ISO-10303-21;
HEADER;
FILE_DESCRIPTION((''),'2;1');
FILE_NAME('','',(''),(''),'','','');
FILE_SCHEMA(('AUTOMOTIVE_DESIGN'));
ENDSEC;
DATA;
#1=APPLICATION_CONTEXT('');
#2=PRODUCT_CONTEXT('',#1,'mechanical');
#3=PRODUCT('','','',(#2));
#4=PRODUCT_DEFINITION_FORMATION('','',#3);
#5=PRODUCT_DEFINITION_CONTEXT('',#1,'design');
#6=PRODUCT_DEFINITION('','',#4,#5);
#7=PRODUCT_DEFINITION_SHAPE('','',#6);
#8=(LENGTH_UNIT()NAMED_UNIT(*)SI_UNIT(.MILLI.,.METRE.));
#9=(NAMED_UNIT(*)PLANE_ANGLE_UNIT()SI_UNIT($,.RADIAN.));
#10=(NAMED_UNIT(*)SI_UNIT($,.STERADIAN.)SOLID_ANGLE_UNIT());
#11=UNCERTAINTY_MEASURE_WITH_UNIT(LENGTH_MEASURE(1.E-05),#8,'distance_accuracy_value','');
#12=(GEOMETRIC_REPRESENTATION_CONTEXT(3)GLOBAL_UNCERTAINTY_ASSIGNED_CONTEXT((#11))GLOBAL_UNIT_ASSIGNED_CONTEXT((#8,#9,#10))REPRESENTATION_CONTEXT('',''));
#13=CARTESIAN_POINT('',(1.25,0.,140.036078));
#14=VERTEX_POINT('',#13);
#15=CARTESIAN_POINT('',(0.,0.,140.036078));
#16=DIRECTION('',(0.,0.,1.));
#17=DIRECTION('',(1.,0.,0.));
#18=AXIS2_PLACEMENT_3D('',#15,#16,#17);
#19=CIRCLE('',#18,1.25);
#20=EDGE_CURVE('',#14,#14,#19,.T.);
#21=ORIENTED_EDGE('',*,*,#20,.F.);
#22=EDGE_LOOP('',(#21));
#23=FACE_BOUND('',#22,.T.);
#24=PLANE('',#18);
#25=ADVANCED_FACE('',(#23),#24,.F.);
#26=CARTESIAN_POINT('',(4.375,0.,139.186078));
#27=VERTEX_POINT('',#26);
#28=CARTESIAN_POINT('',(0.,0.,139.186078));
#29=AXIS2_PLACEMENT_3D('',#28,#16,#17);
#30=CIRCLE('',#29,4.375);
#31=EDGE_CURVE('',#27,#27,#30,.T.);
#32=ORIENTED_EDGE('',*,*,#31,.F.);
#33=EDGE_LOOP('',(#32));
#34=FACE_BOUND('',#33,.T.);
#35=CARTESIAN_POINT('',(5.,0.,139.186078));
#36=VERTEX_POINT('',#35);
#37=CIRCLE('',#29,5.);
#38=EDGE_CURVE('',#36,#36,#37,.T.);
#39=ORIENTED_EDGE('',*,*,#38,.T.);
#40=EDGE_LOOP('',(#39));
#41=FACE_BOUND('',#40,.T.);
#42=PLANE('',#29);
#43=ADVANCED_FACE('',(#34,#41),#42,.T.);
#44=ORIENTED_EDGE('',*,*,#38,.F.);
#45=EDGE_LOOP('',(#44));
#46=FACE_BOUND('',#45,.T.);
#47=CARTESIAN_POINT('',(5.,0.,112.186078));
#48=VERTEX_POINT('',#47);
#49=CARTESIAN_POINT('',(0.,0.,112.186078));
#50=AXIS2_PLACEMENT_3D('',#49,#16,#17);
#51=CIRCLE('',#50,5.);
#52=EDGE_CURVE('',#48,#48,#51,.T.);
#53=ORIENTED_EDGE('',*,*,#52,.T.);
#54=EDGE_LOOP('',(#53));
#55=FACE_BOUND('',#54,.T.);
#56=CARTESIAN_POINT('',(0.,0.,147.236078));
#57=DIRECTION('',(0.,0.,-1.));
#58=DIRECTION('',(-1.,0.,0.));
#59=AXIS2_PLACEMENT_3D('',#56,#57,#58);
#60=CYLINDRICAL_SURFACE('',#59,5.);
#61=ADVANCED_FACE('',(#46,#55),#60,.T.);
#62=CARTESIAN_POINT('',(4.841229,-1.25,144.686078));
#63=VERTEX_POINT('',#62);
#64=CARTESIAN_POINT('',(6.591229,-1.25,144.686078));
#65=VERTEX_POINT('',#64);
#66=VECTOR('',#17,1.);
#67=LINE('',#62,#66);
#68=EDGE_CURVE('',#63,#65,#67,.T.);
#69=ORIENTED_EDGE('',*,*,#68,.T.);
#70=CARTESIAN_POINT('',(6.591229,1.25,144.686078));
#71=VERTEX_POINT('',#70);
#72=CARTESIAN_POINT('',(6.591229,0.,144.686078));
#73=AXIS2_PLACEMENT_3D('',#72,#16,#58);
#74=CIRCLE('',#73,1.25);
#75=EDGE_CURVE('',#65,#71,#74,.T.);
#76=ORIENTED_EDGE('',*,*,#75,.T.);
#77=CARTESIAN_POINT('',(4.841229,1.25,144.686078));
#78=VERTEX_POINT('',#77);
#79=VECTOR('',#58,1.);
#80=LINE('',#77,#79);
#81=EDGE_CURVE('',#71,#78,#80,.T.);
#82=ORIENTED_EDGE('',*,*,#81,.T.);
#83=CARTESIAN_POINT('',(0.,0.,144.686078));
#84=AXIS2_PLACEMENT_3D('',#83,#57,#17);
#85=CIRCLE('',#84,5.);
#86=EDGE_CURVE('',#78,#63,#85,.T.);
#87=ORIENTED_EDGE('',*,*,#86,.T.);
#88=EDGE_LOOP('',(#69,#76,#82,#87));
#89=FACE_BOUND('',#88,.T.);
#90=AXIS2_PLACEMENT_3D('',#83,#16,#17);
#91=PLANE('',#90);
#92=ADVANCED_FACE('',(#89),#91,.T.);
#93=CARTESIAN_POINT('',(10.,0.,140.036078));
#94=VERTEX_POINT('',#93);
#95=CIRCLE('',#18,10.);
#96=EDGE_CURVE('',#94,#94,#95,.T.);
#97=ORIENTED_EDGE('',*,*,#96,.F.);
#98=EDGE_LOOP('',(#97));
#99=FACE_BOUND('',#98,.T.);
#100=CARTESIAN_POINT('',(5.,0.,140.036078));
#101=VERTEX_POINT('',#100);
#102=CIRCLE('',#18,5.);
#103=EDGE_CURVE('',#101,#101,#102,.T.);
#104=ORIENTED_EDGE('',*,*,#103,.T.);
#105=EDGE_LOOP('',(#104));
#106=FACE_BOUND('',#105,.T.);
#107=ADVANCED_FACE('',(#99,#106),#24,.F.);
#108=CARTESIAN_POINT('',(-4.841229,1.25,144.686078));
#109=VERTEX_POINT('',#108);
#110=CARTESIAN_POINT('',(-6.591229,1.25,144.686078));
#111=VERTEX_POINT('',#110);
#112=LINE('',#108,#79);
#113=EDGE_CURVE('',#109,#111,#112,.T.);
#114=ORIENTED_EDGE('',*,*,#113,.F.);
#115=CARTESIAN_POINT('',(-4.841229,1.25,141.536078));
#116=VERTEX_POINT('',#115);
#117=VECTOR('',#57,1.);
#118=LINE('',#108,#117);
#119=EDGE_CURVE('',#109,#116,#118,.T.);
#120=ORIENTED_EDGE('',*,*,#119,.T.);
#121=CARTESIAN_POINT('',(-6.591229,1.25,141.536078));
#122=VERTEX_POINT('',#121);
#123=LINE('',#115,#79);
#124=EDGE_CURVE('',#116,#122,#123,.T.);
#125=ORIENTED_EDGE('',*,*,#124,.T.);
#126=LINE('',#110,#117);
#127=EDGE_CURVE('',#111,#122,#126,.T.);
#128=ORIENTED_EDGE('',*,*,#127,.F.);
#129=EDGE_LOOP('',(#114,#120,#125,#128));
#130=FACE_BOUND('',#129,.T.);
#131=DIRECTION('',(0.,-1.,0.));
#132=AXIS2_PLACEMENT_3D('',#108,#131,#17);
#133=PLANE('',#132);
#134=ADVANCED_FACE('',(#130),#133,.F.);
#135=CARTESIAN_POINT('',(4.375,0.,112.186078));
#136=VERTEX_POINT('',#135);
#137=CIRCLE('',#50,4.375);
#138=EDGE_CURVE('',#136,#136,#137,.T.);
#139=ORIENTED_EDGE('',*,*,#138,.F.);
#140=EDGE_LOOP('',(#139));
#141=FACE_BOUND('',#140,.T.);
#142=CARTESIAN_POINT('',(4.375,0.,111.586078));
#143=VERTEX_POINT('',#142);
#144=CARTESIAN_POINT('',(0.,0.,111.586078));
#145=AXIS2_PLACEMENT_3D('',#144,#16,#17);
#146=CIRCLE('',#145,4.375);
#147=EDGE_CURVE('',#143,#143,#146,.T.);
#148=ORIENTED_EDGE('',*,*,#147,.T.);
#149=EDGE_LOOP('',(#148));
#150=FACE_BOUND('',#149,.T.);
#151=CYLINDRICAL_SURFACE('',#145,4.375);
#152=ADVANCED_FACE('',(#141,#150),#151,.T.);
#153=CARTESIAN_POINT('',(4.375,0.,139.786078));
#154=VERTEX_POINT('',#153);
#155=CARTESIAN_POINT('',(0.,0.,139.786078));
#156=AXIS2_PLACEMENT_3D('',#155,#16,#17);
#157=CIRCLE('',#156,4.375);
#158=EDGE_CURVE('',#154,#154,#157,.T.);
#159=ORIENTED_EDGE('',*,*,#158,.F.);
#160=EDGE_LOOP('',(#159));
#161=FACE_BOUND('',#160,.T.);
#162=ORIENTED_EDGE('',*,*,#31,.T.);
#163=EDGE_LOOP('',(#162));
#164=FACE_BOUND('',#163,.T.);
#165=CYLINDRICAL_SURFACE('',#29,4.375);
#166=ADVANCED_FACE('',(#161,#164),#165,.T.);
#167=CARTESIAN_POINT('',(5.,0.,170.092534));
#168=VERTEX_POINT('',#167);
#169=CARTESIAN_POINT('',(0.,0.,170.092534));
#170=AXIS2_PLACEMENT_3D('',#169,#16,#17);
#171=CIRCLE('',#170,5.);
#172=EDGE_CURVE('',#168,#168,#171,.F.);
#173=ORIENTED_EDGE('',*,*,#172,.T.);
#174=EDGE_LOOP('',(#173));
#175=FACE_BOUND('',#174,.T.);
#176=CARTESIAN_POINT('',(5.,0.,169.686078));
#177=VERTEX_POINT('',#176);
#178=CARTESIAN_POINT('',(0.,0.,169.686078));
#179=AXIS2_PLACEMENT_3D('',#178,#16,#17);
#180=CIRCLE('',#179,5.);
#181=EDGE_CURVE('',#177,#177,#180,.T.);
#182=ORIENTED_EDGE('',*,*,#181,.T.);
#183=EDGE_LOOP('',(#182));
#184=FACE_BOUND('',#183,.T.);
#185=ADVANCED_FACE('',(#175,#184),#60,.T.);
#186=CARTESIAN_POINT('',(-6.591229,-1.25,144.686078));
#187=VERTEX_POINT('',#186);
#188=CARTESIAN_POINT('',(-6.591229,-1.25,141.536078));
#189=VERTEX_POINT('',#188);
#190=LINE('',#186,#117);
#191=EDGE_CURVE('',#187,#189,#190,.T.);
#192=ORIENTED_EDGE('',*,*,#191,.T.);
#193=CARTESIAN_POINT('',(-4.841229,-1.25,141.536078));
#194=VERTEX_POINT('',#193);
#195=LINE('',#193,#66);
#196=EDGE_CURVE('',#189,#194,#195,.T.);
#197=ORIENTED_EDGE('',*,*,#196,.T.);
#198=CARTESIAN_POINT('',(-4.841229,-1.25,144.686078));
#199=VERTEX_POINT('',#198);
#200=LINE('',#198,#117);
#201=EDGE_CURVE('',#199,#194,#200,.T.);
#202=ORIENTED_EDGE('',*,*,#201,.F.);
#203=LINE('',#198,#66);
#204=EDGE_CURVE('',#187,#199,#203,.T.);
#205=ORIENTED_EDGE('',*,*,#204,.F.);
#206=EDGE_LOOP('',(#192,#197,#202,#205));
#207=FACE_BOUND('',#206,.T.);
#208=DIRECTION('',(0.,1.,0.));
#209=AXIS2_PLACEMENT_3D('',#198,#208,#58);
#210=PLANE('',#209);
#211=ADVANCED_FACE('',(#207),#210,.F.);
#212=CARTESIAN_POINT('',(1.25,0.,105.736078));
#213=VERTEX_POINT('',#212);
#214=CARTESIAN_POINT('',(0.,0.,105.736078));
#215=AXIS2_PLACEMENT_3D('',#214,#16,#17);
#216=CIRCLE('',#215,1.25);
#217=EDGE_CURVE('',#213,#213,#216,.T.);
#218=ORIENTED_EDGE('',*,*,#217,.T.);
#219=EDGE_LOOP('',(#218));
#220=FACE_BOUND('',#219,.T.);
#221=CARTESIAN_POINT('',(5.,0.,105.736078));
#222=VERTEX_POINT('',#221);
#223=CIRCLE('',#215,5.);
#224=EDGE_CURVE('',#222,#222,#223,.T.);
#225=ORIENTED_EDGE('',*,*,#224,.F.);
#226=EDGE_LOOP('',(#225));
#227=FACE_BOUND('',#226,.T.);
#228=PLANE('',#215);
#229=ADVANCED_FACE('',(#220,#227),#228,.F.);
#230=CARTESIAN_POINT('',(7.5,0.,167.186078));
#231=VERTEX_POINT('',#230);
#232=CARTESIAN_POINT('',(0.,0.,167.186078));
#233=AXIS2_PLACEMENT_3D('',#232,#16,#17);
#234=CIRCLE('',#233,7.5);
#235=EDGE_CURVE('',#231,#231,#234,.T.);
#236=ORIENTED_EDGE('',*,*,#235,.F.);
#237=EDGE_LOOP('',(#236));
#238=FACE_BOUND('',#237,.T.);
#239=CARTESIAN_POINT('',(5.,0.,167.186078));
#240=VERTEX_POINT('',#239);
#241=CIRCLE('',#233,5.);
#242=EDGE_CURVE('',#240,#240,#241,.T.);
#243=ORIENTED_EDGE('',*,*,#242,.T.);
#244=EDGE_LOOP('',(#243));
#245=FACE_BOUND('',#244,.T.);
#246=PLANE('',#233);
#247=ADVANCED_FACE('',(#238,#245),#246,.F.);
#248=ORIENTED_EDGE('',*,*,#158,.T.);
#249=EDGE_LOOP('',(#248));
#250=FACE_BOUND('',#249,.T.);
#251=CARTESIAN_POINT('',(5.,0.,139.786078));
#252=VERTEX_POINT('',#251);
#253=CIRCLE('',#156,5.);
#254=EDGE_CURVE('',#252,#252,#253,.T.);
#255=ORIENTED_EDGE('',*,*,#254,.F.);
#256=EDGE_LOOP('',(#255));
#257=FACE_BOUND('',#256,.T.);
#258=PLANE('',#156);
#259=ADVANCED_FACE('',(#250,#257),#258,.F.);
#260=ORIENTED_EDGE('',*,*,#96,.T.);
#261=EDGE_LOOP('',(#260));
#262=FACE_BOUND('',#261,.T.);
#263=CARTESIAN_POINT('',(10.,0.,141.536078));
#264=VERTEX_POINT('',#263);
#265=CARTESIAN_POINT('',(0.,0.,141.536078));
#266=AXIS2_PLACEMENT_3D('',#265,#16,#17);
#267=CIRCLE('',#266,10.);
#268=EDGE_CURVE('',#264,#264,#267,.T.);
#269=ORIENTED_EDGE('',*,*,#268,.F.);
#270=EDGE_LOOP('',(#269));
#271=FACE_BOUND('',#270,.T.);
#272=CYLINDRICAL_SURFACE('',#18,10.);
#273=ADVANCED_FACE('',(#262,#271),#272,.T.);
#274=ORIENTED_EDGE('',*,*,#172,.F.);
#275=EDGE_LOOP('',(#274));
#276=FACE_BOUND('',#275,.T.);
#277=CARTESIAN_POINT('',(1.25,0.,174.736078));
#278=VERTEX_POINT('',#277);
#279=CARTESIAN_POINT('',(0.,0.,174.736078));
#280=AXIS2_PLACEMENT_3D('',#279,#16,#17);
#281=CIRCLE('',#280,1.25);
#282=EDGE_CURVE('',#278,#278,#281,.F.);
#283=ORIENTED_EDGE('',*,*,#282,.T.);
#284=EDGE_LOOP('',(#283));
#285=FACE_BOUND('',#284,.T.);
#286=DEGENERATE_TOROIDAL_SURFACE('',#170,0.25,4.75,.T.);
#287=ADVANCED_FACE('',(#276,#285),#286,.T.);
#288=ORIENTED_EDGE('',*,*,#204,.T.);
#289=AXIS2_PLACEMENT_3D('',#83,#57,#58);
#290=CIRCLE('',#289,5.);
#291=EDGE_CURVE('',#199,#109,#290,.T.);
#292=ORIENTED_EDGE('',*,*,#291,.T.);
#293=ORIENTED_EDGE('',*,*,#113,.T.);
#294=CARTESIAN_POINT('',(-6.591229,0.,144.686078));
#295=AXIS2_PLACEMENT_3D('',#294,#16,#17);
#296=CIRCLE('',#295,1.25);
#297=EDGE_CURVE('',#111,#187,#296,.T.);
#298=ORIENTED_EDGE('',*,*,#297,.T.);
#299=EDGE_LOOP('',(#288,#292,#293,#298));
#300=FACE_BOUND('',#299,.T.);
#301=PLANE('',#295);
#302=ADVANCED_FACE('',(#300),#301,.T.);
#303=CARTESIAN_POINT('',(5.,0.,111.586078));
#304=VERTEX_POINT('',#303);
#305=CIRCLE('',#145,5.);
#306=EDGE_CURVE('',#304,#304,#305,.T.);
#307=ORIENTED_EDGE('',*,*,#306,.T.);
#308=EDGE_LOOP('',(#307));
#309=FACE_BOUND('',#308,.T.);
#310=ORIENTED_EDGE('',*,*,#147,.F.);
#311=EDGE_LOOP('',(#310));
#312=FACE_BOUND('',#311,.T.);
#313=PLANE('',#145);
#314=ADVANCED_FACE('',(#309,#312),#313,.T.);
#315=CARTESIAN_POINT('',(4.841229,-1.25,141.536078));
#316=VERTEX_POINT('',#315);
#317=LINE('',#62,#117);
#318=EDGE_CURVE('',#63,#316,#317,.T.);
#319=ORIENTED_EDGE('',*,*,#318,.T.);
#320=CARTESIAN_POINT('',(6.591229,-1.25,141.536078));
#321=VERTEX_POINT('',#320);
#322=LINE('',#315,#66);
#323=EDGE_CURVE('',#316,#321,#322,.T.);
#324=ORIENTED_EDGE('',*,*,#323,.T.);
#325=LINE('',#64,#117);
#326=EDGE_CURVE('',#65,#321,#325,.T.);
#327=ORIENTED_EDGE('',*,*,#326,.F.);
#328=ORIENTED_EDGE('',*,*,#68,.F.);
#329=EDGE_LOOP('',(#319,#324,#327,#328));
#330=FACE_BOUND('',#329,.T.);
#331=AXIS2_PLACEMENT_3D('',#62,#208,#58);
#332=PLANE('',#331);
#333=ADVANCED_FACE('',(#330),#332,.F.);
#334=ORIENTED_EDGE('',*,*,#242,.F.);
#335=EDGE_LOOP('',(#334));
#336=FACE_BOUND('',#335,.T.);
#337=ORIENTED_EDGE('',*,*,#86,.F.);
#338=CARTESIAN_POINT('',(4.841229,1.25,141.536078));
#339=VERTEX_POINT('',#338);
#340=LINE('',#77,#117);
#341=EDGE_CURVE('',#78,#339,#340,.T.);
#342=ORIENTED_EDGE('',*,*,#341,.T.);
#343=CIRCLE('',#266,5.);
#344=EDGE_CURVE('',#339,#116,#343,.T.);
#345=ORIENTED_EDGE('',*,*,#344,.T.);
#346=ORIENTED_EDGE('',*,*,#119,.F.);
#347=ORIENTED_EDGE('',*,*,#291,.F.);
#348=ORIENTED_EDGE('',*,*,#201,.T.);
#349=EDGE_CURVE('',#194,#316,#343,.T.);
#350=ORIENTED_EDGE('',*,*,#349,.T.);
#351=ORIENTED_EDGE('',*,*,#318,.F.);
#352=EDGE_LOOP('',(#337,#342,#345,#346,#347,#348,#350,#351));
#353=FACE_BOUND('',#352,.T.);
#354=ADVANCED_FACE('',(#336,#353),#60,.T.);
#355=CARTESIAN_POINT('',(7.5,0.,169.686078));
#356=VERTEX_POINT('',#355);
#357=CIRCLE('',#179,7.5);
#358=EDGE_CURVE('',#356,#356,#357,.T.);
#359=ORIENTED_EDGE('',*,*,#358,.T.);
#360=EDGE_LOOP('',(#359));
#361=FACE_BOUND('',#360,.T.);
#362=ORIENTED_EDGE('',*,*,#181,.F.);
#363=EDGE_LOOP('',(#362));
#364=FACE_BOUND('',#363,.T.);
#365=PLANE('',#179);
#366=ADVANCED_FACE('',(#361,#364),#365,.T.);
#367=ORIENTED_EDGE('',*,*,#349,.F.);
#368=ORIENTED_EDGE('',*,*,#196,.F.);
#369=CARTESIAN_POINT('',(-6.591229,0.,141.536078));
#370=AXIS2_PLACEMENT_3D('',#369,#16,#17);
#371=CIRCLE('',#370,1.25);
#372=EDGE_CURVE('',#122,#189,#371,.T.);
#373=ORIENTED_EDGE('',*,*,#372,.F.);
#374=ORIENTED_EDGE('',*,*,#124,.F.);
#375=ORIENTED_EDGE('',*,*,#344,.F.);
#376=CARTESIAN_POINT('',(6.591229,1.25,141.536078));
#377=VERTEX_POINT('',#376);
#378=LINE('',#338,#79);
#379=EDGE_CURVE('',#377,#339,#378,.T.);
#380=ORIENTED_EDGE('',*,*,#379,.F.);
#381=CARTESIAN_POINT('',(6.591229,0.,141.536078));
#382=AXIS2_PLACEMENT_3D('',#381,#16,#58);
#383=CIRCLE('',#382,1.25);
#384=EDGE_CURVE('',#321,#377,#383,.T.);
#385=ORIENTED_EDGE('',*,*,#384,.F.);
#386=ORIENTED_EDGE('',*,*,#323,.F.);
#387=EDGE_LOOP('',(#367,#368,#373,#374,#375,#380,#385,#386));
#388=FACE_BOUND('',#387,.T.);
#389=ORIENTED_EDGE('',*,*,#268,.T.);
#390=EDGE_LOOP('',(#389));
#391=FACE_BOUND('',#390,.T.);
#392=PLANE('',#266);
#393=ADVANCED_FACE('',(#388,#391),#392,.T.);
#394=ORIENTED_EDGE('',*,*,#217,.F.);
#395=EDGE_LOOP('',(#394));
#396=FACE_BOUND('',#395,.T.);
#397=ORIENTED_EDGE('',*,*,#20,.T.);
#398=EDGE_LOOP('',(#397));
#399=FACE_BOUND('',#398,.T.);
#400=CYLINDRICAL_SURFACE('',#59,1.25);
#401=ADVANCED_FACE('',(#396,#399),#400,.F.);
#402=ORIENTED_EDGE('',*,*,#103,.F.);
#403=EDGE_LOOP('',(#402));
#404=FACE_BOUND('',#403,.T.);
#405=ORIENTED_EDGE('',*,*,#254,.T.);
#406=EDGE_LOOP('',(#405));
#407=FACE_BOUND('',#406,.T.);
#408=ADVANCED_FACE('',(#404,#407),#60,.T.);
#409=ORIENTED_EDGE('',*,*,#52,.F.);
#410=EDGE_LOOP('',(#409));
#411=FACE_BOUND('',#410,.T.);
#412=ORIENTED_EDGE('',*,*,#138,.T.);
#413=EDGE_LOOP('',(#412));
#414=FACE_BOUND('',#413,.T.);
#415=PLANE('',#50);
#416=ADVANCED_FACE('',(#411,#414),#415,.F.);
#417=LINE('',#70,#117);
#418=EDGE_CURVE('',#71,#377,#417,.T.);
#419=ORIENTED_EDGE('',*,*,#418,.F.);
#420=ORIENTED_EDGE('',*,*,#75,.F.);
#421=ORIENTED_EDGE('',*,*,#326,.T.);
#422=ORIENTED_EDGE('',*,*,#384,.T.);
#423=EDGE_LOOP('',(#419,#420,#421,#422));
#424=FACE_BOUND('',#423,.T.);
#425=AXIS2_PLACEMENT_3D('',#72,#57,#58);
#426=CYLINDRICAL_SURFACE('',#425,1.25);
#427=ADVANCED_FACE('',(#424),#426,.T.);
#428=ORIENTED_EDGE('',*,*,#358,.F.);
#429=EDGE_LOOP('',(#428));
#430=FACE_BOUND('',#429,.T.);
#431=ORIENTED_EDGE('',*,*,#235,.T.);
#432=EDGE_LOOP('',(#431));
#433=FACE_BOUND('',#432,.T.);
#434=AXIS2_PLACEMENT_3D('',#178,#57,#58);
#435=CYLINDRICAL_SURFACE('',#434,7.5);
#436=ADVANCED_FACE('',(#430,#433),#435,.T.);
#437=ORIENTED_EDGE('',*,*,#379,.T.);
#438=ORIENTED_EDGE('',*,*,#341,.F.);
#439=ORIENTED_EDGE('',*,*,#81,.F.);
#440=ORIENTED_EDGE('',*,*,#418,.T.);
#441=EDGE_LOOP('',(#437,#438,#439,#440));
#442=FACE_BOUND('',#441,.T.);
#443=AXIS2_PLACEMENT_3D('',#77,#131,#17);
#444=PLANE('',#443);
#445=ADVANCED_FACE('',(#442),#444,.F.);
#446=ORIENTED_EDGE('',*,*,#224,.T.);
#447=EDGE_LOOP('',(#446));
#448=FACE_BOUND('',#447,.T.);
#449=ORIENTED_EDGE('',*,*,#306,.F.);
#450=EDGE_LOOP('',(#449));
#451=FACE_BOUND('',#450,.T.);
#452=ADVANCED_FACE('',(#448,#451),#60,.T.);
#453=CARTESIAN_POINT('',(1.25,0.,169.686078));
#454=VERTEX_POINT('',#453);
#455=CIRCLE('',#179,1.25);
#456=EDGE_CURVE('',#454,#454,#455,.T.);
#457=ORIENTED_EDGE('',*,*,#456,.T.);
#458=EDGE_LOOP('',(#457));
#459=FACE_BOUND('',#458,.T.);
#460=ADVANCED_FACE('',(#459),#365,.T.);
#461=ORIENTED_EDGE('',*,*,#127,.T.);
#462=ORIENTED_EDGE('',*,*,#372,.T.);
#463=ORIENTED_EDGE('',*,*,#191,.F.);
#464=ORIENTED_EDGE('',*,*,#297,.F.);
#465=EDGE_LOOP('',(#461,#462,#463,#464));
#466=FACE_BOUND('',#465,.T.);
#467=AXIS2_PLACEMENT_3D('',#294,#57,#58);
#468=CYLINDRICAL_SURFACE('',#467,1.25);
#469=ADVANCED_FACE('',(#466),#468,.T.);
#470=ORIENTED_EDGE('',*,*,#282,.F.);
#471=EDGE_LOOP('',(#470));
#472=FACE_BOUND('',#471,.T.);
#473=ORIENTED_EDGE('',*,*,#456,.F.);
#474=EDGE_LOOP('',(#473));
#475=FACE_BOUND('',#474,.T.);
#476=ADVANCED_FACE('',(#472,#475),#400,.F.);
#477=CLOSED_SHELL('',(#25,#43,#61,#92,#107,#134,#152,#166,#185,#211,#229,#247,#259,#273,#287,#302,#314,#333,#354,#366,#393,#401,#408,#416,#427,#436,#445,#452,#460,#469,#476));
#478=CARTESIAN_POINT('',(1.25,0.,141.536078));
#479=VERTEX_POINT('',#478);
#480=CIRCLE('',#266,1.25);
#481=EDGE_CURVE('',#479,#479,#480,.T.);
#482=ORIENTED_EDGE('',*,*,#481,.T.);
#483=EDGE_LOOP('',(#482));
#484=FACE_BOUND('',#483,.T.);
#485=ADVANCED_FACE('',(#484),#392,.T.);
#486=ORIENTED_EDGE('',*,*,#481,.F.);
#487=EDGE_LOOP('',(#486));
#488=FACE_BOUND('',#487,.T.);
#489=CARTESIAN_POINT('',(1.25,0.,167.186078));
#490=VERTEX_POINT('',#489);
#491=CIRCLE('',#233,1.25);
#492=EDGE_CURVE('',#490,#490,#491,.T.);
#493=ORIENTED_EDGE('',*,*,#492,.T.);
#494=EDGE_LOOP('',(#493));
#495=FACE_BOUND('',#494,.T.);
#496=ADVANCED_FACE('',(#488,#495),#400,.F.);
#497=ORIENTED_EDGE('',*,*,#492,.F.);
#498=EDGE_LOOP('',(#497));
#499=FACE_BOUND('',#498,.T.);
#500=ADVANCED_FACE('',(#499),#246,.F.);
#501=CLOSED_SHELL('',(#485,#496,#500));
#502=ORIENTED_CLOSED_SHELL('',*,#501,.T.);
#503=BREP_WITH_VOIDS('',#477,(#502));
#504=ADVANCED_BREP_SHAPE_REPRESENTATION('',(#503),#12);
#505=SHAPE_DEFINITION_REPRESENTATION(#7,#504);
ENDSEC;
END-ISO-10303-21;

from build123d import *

# Parameters (mm, degrees)
SKETCH1_R               = 20
SKETCH1_R_2             = 5
BOSS_EXTRUDE1_DEPTH     = 166
ENL_V_START             = -142.6
ESQUISSE3_R             = 20
ESQUISSE3_R_2           = 17.5
ENL_V_MAT_EXTRU_1_DEPTH = 2.4
ENL_V_START_2           = -32.2
ESQUISSE4_R             = 20
ESQUISSE4_R_2           = 17.5
ENL_V_MAT_EXTRU_2_DEPTH = 2.4
BOSS_EXTRU_1_START      = -22.8
BOSS_EXTRU_1_DEPTH      = 12.6
ESQUISSE6_R             = 20
ESQUISSE6_R_2           = 5
BOSS_EXTRU_2_DEPTH      = 110
BOSS_EXTRU_3_START      = -132.8
ESQUISSE7_R             = 40
BOSS_EXTRU_3_DEPTH      = 6
BOSS_EXTRU_4_START      = -30.2
ESQUISSE8_R             = 30
BOSS_EXTRU_4_DEPTH      = 10
CONG_3_R                = 19
ECHELLE1_SCALE          = 0.25


with BuildPart() as part:
    # Sketch1 → Boss-Extrude1 (new body)
    with BuildSketch(Plane.XY):
        Circle(SKETCH1_R)
        Circle(SKETCH1_R_2, mode=Mode.SUBTRACT)
    extrude(amount=BOSS_EXTRUDE1_DEPTH)

    # Esquisse3 → Enlèv. mat.-Extru.1 (cut)
    with BuildSketch(Plane.XY.offset(166).offset(ENL_V_START)):
        Circle(ESQUISSE3_R)
        Circle(ESQUISSE3_R_2, mode=Mode.SUBTRACT)
    extrude(amount=ENL_V_MAT_EXTRU_1_DEPTH, mode=Mode.SUBTRACT)

    # Esquisse4 → Enlèv. mat.-Extru.2 (cut)
    with BuildSketch(Plane.XY.offset(166).offset(ENL_V_START_2)):
        Circle(ESQUISSE4_R)
        Circle(ESQUISSE4_R_2, mode=Mode.SUBTRACT)
    extrude(amount=ENL_V_MAT_EXTRU_2_DEPTH, mode=Mode.SUBTRACT)

    # Esquisse5 → Boss.-Extru.1 (add)
    with BuildSketch(Plane.XY.offset(166).offset(BOSS_EXTRU_1_START)):
        with BuildLine():
            Line((-19.364916731, 5), (-26.364916731, 5))
            ThreePointArc((-26.364916731, 5), (-31.364916731, 0), (-26.364916731, -5))
            Line((-26.364916731, -5), (-19.364916731, -5))
            ThreePointArc((-19.364916731, -5), (-20, 0), (-19.364916731, 5))
        make_face()
        with BuildLine():
            Line((19.364916731, -5), (26.364916731, -5))
            ThreePointArc((26.364916731, -5), (31.364916731, 0), (26.364916731, 5))
            Line((26.364916731, 5), (19.364916731, 5))
            ThreePointArc((19.364916731, 5), (20, 0), (19.364916731, -5))
        make_face()
    extrude(amount=BOSS_EXTRU_1_DEPTH)

    # Esquisse6 → Boss.-Extru.2 (add)
    with BuildSketch(Plane.XY.offset(166)):
        Circle(ESQUISSE6_R)
        Circle(ESQUISSE6_R_2, mode=Mode.SUBTRACT)
    extrude(amount=BOSS_EXTRU_2_DEPTH)

    # Esquisse7 → Boss.-Extru.3 (add)
    with BuildSketch(Plane.XY.offset(276).offset(BOSS_EXTRU_3_START)):
        Circle(ESQUISSE7_R)
    extrude(amount=-BOSS_EXTRU_3_DEPTH)

    # Esquisse8 → Boss.-Extru.4 (add)
    with BuildSketch(Plane.XY.offset(276).offset(BOSS_EXTRU_4_START)):
        Circle(ESQUISSE8_R)
    extrude(amount=BOSS_EXTRU_4_DEPTH)

    # Congé3
    # the kernel refuses this fillet: 19 mm, written as the material it takes off along each edge
    with BuildSketch(Plane(origin=(0, 0, 276), x_dir=(1, 0, 0), z_dir=(0, -1, 0))) as cong_3_piece_1:
        with BuildLine():
            CenterArc((1, -18.574175621), CONG_3_R, 0, 77.846802531)
            Line((5, 0), (5.08, 0.371483512))
            ThreePointArc((5.08, 0.371483512), (12.5, 0.38), (20, 0.38))
            Line((20, 0.38), (20.38, 0))
            Line((20.38, 0), (20.38, -18.574175621))
            Line((20.38, -18.574175621), (20, -18.574175621))
        make_face()
    revolve(axis=Axis((0, 0, 276), (0, 0, 1)), mode=Mode.SUBTRACT)


with BuildPart() as part_1:
    # Echelle1: scaled about (0, 0, 140.981437802)
    add(part.part.scale(ECHELLE1_SCALE).moved(Location((0, 0, 105.736078351))))


solid = part_1.part
